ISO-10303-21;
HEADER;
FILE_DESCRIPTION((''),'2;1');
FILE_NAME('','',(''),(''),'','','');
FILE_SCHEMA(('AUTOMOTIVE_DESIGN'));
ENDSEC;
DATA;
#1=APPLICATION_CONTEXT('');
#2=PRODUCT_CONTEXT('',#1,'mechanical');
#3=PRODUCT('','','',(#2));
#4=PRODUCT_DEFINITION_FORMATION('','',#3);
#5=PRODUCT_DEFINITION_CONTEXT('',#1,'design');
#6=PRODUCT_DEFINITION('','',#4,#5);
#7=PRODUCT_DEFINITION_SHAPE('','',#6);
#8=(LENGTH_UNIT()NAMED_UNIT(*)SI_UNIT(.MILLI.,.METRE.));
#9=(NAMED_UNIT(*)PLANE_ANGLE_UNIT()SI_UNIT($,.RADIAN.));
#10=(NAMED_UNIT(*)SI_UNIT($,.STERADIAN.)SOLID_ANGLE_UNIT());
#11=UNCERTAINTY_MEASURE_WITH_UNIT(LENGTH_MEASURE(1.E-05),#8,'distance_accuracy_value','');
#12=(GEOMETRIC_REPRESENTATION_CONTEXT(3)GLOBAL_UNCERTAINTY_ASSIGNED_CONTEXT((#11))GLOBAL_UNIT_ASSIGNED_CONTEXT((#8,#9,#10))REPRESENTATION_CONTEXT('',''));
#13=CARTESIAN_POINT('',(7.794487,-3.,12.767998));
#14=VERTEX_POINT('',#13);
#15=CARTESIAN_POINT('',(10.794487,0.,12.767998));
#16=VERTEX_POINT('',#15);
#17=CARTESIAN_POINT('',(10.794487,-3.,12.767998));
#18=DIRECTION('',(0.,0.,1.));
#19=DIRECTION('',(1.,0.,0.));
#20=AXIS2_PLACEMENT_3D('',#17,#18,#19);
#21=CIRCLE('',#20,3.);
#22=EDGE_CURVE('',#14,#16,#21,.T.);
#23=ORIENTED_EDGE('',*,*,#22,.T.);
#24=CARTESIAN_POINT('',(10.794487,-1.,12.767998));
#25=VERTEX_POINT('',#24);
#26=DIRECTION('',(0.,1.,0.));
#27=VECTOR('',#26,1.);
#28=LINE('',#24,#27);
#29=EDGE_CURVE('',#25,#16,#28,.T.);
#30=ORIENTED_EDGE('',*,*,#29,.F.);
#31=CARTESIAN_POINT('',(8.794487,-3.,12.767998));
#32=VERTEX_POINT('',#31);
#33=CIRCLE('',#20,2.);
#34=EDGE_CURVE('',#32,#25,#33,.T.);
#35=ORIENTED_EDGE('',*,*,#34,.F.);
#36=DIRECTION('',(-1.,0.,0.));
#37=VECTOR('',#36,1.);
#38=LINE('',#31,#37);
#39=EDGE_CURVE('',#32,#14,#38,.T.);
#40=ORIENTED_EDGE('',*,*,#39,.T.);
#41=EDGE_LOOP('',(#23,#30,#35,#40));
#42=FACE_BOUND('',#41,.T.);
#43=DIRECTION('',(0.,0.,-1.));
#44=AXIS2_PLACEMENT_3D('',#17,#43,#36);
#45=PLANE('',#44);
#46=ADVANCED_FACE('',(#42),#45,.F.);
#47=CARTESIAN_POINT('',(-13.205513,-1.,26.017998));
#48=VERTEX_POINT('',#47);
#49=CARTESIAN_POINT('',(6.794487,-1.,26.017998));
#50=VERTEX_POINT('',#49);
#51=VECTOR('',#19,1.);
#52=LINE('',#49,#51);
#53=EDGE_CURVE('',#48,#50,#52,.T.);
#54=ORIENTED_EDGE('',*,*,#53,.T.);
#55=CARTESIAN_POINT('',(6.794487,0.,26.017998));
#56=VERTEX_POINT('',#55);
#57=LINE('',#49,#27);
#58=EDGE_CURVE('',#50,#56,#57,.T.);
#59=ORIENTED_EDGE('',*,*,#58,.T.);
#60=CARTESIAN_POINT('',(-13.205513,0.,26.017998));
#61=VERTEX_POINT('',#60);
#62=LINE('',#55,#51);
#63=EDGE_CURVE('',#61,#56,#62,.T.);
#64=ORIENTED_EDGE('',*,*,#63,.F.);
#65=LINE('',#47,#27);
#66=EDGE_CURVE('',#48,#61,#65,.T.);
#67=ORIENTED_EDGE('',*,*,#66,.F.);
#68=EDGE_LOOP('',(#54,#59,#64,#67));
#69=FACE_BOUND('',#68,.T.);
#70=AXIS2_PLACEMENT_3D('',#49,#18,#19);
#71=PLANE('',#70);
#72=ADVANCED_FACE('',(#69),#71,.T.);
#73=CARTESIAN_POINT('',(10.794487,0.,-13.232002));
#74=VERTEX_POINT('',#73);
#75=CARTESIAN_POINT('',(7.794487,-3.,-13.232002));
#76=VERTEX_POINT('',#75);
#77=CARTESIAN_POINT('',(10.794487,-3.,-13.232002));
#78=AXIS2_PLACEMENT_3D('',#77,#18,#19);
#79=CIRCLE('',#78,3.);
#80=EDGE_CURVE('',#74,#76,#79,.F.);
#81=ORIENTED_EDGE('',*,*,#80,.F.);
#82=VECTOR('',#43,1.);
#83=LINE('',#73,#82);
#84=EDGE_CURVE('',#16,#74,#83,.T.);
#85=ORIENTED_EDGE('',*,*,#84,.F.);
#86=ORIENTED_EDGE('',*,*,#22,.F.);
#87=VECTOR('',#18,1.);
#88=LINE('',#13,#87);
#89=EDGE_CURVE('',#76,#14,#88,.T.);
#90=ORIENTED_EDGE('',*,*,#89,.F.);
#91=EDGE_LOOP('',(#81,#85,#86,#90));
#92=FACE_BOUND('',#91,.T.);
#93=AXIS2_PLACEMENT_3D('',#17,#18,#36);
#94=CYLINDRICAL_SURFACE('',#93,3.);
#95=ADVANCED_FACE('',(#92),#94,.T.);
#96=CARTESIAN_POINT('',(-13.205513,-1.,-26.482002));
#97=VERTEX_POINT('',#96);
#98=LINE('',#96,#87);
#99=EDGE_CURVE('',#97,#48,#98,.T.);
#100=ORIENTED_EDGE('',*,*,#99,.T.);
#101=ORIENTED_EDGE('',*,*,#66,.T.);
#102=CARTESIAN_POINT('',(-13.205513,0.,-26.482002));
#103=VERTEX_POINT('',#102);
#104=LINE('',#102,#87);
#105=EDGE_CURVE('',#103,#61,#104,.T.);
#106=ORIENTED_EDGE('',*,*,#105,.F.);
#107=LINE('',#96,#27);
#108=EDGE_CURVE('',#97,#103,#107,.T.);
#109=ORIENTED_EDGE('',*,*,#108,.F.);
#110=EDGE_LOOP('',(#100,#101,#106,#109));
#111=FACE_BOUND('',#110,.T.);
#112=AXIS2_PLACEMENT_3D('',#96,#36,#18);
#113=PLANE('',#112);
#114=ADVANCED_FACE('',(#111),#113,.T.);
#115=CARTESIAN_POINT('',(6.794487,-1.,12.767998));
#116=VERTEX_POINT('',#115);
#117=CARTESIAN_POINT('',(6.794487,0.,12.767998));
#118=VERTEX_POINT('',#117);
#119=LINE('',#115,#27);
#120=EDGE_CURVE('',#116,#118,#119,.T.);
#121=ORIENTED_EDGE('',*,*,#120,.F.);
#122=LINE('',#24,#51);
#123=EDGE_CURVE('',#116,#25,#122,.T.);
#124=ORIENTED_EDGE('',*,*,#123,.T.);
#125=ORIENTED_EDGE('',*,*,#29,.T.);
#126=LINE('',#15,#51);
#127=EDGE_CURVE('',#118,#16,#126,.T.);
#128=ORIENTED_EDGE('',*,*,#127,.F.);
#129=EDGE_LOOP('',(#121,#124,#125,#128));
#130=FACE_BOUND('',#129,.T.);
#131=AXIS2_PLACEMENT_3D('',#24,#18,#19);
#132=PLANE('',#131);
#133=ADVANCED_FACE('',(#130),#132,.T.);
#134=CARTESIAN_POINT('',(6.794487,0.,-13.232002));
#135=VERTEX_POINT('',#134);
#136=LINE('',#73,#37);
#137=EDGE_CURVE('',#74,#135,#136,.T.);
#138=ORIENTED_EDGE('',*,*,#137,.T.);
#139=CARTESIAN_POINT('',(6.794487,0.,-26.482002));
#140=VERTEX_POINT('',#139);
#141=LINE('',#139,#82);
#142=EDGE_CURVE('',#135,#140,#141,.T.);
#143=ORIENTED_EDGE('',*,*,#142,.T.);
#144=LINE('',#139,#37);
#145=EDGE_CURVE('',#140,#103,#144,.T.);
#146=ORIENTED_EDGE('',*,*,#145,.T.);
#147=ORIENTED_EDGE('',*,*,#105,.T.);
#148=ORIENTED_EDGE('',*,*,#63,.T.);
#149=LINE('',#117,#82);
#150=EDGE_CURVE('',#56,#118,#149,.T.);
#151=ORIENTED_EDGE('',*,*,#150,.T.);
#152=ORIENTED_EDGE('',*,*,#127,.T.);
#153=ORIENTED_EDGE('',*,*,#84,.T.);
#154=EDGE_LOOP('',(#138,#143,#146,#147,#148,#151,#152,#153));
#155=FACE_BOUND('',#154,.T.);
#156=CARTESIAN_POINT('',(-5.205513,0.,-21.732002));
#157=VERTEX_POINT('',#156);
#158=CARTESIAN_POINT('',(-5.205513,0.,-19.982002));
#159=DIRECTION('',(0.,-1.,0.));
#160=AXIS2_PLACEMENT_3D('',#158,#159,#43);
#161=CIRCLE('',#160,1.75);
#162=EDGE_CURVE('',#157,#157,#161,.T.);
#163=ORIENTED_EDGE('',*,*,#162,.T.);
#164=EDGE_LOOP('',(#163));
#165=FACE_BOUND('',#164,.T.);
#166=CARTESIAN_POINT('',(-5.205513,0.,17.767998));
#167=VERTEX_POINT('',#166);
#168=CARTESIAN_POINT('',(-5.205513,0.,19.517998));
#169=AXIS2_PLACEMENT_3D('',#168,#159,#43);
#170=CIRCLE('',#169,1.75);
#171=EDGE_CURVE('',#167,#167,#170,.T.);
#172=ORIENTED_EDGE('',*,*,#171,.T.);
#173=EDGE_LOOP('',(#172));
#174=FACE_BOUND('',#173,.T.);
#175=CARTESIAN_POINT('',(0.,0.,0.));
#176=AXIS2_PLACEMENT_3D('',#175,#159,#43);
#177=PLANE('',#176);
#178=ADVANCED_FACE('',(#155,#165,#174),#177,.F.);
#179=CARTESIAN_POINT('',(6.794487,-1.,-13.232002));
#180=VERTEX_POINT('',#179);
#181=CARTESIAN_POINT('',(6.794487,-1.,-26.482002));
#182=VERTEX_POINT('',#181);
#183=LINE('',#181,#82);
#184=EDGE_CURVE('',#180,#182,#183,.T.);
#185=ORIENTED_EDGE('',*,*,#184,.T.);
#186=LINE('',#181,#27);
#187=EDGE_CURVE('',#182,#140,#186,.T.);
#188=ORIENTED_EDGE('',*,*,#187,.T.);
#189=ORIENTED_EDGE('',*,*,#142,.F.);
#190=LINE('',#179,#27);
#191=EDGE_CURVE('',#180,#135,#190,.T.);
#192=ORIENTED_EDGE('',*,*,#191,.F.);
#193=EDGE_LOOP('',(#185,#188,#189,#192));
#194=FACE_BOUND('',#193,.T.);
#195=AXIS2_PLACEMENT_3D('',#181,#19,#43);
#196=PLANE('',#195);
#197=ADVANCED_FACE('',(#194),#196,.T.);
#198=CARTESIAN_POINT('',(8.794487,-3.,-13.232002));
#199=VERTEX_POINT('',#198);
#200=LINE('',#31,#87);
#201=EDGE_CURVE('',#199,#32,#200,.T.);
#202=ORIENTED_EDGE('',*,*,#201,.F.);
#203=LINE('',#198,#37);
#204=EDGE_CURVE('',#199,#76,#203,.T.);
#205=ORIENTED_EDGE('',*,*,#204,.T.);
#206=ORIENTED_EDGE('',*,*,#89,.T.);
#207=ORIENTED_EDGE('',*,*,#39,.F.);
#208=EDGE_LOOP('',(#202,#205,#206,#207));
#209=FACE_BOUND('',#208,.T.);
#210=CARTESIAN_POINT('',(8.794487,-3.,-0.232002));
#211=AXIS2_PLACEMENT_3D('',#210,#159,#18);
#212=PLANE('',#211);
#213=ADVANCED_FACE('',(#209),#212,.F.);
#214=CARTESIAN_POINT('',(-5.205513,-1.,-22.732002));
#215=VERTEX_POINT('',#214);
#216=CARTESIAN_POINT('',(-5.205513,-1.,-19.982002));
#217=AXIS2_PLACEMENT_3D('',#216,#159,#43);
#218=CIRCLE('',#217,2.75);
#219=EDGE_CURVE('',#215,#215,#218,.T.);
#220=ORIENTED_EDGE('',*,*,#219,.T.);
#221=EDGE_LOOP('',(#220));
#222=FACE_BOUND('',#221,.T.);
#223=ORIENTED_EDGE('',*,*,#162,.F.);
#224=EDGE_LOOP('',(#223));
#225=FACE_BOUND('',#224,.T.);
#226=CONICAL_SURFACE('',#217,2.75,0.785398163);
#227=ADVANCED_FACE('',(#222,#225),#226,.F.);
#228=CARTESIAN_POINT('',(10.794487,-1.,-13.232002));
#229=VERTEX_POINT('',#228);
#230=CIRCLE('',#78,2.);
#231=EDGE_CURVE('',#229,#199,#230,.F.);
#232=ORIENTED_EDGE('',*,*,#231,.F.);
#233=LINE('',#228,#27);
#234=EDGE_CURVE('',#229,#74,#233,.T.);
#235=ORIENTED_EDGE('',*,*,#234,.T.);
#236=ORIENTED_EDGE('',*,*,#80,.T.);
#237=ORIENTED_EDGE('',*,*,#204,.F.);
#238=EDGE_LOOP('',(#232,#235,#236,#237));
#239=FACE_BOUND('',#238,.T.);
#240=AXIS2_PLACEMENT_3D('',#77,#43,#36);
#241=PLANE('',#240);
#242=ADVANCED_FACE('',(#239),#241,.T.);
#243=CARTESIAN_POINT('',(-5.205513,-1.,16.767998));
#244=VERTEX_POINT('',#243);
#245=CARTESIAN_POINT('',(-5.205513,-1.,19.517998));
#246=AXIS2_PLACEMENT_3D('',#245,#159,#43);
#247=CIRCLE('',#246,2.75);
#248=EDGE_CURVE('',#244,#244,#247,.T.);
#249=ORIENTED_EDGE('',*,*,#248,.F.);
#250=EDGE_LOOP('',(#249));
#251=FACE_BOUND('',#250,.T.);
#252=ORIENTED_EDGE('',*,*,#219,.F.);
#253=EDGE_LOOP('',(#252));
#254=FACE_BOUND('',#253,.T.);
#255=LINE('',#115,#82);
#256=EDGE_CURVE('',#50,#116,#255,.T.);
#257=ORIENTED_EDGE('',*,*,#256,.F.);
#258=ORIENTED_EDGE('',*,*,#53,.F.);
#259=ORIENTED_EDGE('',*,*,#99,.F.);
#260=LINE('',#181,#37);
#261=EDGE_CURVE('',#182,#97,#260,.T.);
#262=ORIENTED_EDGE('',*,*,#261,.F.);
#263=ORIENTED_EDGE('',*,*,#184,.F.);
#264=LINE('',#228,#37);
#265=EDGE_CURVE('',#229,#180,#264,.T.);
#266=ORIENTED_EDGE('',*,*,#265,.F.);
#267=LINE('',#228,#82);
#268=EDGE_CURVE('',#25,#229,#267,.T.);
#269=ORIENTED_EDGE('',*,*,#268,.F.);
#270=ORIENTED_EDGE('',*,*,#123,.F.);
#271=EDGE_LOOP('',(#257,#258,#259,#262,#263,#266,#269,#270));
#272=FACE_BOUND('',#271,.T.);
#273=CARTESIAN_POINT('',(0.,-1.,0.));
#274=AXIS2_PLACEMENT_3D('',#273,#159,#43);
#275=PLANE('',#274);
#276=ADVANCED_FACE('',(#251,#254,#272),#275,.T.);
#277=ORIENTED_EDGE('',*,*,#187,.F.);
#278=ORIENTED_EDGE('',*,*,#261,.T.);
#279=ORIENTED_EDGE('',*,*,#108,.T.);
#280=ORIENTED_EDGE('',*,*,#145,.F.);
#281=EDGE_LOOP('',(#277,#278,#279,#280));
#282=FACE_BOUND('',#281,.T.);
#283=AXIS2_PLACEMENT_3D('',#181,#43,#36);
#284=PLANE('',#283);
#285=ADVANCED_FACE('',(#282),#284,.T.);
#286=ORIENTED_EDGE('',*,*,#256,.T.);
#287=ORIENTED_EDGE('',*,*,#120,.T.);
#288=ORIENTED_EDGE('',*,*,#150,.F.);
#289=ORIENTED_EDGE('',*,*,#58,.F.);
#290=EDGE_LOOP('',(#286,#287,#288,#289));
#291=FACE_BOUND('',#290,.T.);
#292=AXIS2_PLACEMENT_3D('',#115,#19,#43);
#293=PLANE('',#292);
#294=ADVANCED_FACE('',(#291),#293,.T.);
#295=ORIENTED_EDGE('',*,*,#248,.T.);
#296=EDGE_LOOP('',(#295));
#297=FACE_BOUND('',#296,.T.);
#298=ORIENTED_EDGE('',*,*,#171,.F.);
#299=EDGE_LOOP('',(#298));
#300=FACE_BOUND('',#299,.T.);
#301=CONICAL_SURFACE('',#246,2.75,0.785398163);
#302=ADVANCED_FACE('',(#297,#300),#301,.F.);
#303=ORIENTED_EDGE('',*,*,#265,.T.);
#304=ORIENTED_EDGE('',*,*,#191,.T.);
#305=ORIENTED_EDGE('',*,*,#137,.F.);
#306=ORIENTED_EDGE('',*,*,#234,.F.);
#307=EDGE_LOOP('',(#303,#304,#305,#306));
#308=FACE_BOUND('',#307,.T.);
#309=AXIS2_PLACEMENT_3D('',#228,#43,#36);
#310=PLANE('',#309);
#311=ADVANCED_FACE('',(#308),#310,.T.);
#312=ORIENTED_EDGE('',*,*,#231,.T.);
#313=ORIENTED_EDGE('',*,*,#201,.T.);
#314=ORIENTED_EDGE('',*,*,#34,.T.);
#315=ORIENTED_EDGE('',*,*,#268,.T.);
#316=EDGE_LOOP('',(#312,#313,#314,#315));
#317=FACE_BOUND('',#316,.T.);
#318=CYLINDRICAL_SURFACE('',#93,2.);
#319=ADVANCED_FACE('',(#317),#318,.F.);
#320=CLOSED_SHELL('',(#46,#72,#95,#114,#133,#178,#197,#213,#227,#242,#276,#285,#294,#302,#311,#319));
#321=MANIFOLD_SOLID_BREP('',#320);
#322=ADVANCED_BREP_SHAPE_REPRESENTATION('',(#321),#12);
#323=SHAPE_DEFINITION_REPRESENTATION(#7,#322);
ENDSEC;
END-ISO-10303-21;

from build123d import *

# Parameters (mm, degrees)
BASE_FLANGE1_DEPTH                                = 1
HEM1_START                                        = -13.232002457
HEM1_DEPTH                                        = 26
CSK_FOR_M2_5_OVAL_HEAD_MACHINE_SCREW1_D           = 3.1
CSK_FOR_M2_5_OVAL_HEAD_MACHINE_SCREW1_DEPTH       = 4
CSK_FOR_M2_5_OVAL_HEAD_MACHINE_SCREW1_CSINK_D     = 5.5
CSK_FOR_M2_5_OVAL_HEAD_MACHINE_SCREW1_CSINK_ANGLE = 90
CSK_FOR_M2_5_OVAL_HEAD_MACHINE_SCREW1_TIP         = 0.931333959


# Read off the part's stored shape, not the designer's step: Hem1
# Sheet-metal steps are written as plain solids
with BuildPart() as part:
    # Sketch1 → Base-Flange1 (new body)
    with BuildSketch(Plane(origin=(0, 0, 0), x_dir=(1, 0, 0), z_dir=(0, 1, 0))):
        Polygon((6.794487322, 26.482002457), (-13.205512678, 26.482002457), (-13.205512678, -26.017997543), (6.794487322, -26.017997543), (6.794487322, -12.767997543), (10.794487322, -12.767997543), (10.794487322, 13.232002457), (6.794487322, 13.232002457), align=None)
    extrude(amount=-BASE_FLANGE1_DEPTH)

    # Hem1 outline → Hem1 (add)
    with BuildSketch(Plane.XY.offset(HEM1_START)):
        with BuildLine():
            Line((8.794487322, -3), (7.794487322, -3))
            ThreePointArc((7.794487322, -3), (12.915807666, -5.121320344), (10.794487322, 0))
            Line((10.794487322, 0), (10.794487322, -1))
            ThreePointArc((10.794487322, -1), (12.208700884, -4.414213562), (8.794487322, -3))
        make_face()
    extrude(amount=HEM1_DEPTH)

    # CSK for M2.5 Oval Head Machine Screw1
    with Locations(Plane(origin=(-5.205512678, -1, -19.982002457), x_dir=(0, 0, -1), z_dir=(0, -1, 0))):
        with Locations((0, 0), (-39.5, 0)):
            CounterSinkHole(CSK_FOR_M2_5_OVAL_HEAD_MACHINE_SCREW1_D / 2, CSK_FOR_M2_5_OVAL_HEAD_MACHINE_SCREW1_CSINK_D / 2, depth=CSK_FOR_M2_5_OVAL_HEAD_MACHINE_SCREW1_DEPTH, counter_sink_angle=CSK_FOR_M2_5_OVAL_HEAD_MACHINE_SCREW1_CSINK_ANGLE)
            with Locations((0, 0, -(CSK_FOR_M2_5_OVAL_HEAD_MACHINE_SCREW1_DEPTH + CSK_FOR_M2_5_OVAL_HEAD_MACHINE_SCREW1_TIP / 2))):  # 118° drill point
                Cone(0, CSK_FOR_M2_5_OVAL_HEAD_MACHINE_SCREW1_D / 2, CSK_FOR_M2_5_OVAL_HEAD_MACHINE_SCREW1_TIP, mode=Mode.SUBTRACT)


solid = part.part
